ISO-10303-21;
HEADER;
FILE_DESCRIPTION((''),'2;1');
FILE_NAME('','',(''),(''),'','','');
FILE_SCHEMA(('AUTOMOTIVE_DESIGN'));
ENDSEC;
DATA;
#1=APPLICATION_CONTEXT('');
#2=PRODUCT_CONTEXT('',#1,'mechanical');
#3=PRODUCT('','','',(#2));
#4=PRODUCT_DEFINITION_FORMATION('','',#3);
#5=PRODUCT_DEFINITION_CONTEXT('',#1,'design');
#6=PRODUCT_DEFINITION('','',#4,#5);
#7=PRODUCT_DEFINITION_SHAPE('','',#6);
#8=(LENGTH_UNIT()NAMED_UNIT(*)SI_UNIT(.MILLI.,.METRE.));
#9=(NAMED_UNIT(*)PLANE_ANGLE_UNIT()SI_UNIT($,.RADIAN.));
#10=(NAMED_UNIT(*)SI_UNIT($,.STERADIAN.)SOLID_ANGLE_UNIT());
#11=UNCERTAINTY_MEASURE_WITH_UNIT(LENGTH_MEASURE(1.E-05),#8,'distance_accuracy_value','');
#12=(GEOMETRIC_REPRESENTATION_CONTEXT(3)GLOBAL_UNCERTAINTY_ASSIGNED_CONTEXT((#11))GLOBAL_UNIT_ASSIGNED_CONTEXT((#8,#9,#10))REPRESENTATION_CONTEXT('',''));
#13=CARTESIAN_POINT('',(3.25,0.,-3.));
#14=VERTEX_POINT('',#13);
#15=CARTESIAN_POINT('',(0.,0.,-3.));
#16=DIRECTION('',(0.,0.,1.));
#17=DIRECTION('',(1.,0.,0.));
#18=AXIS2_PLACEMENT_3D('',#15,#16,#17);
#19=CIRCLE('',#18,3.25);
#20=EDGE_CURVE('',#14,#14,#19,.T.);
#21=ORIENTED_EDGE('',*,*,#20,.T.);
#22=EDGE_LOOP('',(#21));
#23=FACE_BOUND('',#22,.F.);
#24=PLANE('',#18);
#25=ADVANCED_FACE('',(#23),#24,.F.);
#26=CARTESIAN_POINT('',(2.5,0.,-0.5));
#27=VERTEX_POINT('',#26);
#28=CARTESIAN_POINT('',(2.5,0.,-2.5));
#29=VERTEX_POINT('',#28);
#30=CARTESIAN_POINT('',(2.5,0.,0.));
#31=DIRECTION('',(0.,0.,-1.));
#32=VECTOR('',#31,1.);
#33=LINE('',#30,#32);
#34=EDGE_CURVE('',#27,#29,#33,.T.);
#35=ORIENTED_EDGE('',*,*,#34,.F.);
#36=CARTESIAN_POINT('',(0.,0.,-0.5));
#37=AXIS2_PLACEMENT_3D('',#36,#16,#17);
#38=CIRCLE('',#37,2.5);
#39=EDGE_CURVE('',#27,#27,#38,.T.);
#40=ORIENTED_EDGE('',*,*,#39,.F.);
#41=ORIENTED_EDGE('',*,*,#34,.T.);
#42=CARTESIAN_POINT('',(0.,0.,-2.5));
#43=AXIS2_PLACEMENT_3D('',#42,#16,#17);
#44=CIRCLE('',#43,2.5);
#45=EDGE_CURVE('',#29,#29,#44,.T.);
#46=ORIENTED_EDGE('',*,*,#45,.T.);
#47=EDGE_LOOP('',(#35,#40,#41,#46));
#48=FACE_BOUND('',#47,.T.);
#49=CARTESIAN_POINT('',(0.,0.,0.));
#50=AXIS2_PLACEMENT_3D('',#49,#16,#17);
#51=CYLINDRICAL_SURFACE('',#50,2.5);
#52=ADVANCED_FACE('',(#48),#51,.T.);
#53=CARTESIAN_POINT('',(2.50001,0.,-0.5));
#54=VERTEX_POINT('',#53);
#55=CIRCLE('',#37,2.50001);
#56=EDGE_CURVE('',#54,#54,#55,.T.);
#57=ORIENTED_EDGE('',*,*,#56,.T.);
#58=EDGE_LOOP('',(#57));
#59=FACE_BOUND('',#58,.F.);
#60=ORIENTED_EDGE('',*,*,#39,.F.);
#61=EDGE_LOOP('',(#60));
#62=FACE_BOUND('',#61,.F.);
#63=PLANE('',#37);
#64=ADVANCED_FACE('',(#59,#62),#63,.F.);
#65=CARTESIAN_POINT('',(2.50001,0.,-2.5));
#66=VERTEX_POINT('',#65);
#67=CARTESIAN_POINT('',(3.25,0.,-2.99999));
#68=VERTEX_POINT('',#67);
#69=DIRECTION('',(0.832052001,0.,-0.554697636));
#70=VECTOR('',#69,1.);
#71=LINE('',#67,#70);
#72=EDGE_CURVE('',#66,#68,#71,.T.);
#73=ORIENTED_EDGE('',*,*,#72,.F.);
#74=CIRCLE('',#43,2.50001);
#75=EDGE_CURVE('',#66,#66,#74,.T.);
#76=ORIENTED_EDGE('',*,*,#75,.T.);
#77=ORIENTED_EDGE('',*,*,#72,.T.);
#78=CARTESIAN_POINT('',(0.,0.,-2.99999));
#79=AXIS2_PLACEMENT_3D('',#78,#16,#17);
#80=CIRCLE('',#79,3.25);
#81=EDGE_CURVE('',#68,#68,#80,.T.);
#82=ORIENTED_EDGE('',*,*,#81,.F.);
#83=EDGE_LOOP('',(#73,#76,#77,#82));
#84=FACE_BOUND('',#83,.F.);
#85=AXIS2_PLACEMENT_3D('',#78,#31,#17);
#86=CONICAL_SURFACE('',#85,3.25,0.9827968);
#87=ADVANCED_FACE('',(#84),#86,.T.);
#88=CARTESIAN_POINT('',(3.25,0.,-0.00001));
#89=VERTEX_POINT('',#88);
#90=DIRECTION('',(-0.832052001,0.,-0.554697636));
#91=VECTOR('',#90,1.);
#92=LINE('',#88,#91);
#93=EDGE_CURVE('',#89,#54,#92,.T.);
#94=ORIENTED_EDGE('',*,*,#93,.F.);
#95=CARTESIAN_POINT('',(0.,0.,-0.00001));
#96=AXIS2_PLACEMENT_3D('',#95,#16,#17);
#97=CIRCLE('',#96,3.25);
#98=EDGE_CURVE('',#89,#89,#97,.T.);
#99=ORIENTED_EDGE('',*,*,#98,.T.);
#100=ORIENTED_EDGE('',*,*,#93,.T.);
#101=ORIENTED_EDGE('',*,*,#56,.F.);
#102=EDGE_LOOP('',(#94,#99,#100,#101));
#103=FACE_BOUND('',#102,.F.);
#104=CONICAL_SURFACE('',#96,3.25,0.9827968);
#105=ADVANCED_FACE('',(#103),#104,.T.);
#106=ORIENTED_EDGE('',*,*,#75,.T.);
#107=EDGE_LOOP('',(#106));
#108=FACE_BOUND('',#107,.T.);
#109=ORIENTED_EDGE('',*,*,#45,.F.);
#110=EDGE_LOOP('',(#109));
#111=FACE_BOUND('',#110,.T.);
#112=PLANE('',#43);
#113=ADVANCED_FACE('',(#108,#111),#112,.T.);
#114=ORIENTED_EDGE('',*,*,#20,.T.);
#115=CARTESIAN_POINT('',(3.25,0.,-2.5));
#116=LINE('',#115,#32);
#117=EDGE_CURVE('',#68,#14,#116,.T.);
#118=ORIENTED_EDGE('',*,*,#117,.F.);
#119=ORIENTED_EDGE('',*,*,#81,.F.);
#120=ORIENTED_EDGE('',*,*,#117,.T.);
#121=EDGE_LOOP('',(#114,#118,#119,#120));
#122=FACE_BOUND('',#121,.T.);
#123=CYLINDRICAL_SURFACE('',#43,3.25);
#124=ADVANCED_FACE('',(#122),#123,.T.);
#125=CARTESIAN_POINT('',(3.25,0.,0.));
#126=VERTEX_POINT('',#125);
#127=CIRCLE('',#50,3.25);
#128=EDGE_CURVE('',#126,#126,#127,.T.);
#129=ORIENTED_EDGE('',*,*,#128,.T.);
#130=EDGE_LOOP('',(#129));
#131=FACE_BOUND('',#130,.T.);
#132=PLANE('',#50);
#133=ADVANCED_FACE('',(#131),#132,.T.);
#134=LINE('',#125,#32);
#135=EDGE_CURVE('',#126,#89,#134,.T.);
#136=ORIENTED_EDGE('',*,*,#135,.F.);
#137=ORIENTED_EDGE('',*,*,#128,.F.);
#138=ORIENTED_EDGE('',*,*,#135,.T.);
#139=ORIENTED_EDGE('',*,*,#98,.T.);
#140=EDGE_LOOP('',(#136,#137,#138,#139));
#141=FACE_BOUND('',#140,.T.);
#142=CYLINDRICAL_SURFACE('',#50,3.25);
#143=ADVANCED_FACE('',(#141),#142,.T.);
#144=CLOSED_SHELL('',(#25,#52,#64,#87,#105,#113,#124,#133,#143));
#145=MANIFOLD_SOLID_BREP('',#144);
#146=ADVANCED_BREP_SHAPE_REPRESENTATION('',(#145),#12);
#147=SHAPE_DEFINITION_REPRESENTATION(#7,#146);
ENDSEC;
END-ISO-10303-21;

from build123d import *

# Parameters (mm, degrees)
F0_R     = 2.5
F1_DEPTH = 3
F2_START = -2.5
F0_R_2   = 3.25
F2_DEPTH = 0.5
F3_DEPTH = 0.5
F4_SIZE2 = 0.74999
F4_SIZE  = 0.49999
F5_SIZE2 = 0.49999
F5_SIZE  = 0.74999


# Not quite as in the source:
# - a fillet or chamfer is up to 0.001 mm smaller than in the source, because OpenCascade refuses the exact size


with BuildPart() as f1:
    # F0 (on Top) → F1 (new body)
    with BuildSketch(Plane.XY):
        Circle(F0_R)
    extrude(amount=-F1_DEPTH)

    # F0 (on Top) → F2 (join)
    with BuildSketch(Plane.XY.offset(F2_START)):
        Circle(F0_R_2)
        Circle(F0_R, mode=Mode.SUBTRACT)
    extrude(amount=-F2_DEPTH)

    # F0 (on Top) → F3 (join)
    with BuildSketch(Plane.XY):
        Circle(F0_R_2)
        Circle(F0_R, mode=Mode.SUBTRACT)
    extrude(amount=-F3_DEPTH)

    # F4 (size 0.5 and 0.75 in the source; OpenCascade refuses exactly that, so slightly less here)
    f4_edges = [f1.edges().sort_by_distance(p)[0] for p in [
        (-3.25, 0, -0.5),
    ]]
    f4_side = f1.faces().sort_by_distance((-3.25, 0, -0.25))[0]
    chamfer(f4_edges, length=F4_SIZE, length2=F4_SIZE2, reference=f4_side)

    # F5 (size 0.75 and 0.5 in the source; OpenCascade refuses exactly that, so slightly less here)
    f5_edges = [f1.edges().sort_by_distance(p)[0] for p in [
        (-3.25, 0, -2.5),
    ]]
    f5_side = f1.faces().sort_by_distance((-3.158076, 0, -2.5))[0]
    chamfer(f5_edges, length=F5_SIZE, length2=F5_SIZE2, reference=f5_side)


solid = f1.part
